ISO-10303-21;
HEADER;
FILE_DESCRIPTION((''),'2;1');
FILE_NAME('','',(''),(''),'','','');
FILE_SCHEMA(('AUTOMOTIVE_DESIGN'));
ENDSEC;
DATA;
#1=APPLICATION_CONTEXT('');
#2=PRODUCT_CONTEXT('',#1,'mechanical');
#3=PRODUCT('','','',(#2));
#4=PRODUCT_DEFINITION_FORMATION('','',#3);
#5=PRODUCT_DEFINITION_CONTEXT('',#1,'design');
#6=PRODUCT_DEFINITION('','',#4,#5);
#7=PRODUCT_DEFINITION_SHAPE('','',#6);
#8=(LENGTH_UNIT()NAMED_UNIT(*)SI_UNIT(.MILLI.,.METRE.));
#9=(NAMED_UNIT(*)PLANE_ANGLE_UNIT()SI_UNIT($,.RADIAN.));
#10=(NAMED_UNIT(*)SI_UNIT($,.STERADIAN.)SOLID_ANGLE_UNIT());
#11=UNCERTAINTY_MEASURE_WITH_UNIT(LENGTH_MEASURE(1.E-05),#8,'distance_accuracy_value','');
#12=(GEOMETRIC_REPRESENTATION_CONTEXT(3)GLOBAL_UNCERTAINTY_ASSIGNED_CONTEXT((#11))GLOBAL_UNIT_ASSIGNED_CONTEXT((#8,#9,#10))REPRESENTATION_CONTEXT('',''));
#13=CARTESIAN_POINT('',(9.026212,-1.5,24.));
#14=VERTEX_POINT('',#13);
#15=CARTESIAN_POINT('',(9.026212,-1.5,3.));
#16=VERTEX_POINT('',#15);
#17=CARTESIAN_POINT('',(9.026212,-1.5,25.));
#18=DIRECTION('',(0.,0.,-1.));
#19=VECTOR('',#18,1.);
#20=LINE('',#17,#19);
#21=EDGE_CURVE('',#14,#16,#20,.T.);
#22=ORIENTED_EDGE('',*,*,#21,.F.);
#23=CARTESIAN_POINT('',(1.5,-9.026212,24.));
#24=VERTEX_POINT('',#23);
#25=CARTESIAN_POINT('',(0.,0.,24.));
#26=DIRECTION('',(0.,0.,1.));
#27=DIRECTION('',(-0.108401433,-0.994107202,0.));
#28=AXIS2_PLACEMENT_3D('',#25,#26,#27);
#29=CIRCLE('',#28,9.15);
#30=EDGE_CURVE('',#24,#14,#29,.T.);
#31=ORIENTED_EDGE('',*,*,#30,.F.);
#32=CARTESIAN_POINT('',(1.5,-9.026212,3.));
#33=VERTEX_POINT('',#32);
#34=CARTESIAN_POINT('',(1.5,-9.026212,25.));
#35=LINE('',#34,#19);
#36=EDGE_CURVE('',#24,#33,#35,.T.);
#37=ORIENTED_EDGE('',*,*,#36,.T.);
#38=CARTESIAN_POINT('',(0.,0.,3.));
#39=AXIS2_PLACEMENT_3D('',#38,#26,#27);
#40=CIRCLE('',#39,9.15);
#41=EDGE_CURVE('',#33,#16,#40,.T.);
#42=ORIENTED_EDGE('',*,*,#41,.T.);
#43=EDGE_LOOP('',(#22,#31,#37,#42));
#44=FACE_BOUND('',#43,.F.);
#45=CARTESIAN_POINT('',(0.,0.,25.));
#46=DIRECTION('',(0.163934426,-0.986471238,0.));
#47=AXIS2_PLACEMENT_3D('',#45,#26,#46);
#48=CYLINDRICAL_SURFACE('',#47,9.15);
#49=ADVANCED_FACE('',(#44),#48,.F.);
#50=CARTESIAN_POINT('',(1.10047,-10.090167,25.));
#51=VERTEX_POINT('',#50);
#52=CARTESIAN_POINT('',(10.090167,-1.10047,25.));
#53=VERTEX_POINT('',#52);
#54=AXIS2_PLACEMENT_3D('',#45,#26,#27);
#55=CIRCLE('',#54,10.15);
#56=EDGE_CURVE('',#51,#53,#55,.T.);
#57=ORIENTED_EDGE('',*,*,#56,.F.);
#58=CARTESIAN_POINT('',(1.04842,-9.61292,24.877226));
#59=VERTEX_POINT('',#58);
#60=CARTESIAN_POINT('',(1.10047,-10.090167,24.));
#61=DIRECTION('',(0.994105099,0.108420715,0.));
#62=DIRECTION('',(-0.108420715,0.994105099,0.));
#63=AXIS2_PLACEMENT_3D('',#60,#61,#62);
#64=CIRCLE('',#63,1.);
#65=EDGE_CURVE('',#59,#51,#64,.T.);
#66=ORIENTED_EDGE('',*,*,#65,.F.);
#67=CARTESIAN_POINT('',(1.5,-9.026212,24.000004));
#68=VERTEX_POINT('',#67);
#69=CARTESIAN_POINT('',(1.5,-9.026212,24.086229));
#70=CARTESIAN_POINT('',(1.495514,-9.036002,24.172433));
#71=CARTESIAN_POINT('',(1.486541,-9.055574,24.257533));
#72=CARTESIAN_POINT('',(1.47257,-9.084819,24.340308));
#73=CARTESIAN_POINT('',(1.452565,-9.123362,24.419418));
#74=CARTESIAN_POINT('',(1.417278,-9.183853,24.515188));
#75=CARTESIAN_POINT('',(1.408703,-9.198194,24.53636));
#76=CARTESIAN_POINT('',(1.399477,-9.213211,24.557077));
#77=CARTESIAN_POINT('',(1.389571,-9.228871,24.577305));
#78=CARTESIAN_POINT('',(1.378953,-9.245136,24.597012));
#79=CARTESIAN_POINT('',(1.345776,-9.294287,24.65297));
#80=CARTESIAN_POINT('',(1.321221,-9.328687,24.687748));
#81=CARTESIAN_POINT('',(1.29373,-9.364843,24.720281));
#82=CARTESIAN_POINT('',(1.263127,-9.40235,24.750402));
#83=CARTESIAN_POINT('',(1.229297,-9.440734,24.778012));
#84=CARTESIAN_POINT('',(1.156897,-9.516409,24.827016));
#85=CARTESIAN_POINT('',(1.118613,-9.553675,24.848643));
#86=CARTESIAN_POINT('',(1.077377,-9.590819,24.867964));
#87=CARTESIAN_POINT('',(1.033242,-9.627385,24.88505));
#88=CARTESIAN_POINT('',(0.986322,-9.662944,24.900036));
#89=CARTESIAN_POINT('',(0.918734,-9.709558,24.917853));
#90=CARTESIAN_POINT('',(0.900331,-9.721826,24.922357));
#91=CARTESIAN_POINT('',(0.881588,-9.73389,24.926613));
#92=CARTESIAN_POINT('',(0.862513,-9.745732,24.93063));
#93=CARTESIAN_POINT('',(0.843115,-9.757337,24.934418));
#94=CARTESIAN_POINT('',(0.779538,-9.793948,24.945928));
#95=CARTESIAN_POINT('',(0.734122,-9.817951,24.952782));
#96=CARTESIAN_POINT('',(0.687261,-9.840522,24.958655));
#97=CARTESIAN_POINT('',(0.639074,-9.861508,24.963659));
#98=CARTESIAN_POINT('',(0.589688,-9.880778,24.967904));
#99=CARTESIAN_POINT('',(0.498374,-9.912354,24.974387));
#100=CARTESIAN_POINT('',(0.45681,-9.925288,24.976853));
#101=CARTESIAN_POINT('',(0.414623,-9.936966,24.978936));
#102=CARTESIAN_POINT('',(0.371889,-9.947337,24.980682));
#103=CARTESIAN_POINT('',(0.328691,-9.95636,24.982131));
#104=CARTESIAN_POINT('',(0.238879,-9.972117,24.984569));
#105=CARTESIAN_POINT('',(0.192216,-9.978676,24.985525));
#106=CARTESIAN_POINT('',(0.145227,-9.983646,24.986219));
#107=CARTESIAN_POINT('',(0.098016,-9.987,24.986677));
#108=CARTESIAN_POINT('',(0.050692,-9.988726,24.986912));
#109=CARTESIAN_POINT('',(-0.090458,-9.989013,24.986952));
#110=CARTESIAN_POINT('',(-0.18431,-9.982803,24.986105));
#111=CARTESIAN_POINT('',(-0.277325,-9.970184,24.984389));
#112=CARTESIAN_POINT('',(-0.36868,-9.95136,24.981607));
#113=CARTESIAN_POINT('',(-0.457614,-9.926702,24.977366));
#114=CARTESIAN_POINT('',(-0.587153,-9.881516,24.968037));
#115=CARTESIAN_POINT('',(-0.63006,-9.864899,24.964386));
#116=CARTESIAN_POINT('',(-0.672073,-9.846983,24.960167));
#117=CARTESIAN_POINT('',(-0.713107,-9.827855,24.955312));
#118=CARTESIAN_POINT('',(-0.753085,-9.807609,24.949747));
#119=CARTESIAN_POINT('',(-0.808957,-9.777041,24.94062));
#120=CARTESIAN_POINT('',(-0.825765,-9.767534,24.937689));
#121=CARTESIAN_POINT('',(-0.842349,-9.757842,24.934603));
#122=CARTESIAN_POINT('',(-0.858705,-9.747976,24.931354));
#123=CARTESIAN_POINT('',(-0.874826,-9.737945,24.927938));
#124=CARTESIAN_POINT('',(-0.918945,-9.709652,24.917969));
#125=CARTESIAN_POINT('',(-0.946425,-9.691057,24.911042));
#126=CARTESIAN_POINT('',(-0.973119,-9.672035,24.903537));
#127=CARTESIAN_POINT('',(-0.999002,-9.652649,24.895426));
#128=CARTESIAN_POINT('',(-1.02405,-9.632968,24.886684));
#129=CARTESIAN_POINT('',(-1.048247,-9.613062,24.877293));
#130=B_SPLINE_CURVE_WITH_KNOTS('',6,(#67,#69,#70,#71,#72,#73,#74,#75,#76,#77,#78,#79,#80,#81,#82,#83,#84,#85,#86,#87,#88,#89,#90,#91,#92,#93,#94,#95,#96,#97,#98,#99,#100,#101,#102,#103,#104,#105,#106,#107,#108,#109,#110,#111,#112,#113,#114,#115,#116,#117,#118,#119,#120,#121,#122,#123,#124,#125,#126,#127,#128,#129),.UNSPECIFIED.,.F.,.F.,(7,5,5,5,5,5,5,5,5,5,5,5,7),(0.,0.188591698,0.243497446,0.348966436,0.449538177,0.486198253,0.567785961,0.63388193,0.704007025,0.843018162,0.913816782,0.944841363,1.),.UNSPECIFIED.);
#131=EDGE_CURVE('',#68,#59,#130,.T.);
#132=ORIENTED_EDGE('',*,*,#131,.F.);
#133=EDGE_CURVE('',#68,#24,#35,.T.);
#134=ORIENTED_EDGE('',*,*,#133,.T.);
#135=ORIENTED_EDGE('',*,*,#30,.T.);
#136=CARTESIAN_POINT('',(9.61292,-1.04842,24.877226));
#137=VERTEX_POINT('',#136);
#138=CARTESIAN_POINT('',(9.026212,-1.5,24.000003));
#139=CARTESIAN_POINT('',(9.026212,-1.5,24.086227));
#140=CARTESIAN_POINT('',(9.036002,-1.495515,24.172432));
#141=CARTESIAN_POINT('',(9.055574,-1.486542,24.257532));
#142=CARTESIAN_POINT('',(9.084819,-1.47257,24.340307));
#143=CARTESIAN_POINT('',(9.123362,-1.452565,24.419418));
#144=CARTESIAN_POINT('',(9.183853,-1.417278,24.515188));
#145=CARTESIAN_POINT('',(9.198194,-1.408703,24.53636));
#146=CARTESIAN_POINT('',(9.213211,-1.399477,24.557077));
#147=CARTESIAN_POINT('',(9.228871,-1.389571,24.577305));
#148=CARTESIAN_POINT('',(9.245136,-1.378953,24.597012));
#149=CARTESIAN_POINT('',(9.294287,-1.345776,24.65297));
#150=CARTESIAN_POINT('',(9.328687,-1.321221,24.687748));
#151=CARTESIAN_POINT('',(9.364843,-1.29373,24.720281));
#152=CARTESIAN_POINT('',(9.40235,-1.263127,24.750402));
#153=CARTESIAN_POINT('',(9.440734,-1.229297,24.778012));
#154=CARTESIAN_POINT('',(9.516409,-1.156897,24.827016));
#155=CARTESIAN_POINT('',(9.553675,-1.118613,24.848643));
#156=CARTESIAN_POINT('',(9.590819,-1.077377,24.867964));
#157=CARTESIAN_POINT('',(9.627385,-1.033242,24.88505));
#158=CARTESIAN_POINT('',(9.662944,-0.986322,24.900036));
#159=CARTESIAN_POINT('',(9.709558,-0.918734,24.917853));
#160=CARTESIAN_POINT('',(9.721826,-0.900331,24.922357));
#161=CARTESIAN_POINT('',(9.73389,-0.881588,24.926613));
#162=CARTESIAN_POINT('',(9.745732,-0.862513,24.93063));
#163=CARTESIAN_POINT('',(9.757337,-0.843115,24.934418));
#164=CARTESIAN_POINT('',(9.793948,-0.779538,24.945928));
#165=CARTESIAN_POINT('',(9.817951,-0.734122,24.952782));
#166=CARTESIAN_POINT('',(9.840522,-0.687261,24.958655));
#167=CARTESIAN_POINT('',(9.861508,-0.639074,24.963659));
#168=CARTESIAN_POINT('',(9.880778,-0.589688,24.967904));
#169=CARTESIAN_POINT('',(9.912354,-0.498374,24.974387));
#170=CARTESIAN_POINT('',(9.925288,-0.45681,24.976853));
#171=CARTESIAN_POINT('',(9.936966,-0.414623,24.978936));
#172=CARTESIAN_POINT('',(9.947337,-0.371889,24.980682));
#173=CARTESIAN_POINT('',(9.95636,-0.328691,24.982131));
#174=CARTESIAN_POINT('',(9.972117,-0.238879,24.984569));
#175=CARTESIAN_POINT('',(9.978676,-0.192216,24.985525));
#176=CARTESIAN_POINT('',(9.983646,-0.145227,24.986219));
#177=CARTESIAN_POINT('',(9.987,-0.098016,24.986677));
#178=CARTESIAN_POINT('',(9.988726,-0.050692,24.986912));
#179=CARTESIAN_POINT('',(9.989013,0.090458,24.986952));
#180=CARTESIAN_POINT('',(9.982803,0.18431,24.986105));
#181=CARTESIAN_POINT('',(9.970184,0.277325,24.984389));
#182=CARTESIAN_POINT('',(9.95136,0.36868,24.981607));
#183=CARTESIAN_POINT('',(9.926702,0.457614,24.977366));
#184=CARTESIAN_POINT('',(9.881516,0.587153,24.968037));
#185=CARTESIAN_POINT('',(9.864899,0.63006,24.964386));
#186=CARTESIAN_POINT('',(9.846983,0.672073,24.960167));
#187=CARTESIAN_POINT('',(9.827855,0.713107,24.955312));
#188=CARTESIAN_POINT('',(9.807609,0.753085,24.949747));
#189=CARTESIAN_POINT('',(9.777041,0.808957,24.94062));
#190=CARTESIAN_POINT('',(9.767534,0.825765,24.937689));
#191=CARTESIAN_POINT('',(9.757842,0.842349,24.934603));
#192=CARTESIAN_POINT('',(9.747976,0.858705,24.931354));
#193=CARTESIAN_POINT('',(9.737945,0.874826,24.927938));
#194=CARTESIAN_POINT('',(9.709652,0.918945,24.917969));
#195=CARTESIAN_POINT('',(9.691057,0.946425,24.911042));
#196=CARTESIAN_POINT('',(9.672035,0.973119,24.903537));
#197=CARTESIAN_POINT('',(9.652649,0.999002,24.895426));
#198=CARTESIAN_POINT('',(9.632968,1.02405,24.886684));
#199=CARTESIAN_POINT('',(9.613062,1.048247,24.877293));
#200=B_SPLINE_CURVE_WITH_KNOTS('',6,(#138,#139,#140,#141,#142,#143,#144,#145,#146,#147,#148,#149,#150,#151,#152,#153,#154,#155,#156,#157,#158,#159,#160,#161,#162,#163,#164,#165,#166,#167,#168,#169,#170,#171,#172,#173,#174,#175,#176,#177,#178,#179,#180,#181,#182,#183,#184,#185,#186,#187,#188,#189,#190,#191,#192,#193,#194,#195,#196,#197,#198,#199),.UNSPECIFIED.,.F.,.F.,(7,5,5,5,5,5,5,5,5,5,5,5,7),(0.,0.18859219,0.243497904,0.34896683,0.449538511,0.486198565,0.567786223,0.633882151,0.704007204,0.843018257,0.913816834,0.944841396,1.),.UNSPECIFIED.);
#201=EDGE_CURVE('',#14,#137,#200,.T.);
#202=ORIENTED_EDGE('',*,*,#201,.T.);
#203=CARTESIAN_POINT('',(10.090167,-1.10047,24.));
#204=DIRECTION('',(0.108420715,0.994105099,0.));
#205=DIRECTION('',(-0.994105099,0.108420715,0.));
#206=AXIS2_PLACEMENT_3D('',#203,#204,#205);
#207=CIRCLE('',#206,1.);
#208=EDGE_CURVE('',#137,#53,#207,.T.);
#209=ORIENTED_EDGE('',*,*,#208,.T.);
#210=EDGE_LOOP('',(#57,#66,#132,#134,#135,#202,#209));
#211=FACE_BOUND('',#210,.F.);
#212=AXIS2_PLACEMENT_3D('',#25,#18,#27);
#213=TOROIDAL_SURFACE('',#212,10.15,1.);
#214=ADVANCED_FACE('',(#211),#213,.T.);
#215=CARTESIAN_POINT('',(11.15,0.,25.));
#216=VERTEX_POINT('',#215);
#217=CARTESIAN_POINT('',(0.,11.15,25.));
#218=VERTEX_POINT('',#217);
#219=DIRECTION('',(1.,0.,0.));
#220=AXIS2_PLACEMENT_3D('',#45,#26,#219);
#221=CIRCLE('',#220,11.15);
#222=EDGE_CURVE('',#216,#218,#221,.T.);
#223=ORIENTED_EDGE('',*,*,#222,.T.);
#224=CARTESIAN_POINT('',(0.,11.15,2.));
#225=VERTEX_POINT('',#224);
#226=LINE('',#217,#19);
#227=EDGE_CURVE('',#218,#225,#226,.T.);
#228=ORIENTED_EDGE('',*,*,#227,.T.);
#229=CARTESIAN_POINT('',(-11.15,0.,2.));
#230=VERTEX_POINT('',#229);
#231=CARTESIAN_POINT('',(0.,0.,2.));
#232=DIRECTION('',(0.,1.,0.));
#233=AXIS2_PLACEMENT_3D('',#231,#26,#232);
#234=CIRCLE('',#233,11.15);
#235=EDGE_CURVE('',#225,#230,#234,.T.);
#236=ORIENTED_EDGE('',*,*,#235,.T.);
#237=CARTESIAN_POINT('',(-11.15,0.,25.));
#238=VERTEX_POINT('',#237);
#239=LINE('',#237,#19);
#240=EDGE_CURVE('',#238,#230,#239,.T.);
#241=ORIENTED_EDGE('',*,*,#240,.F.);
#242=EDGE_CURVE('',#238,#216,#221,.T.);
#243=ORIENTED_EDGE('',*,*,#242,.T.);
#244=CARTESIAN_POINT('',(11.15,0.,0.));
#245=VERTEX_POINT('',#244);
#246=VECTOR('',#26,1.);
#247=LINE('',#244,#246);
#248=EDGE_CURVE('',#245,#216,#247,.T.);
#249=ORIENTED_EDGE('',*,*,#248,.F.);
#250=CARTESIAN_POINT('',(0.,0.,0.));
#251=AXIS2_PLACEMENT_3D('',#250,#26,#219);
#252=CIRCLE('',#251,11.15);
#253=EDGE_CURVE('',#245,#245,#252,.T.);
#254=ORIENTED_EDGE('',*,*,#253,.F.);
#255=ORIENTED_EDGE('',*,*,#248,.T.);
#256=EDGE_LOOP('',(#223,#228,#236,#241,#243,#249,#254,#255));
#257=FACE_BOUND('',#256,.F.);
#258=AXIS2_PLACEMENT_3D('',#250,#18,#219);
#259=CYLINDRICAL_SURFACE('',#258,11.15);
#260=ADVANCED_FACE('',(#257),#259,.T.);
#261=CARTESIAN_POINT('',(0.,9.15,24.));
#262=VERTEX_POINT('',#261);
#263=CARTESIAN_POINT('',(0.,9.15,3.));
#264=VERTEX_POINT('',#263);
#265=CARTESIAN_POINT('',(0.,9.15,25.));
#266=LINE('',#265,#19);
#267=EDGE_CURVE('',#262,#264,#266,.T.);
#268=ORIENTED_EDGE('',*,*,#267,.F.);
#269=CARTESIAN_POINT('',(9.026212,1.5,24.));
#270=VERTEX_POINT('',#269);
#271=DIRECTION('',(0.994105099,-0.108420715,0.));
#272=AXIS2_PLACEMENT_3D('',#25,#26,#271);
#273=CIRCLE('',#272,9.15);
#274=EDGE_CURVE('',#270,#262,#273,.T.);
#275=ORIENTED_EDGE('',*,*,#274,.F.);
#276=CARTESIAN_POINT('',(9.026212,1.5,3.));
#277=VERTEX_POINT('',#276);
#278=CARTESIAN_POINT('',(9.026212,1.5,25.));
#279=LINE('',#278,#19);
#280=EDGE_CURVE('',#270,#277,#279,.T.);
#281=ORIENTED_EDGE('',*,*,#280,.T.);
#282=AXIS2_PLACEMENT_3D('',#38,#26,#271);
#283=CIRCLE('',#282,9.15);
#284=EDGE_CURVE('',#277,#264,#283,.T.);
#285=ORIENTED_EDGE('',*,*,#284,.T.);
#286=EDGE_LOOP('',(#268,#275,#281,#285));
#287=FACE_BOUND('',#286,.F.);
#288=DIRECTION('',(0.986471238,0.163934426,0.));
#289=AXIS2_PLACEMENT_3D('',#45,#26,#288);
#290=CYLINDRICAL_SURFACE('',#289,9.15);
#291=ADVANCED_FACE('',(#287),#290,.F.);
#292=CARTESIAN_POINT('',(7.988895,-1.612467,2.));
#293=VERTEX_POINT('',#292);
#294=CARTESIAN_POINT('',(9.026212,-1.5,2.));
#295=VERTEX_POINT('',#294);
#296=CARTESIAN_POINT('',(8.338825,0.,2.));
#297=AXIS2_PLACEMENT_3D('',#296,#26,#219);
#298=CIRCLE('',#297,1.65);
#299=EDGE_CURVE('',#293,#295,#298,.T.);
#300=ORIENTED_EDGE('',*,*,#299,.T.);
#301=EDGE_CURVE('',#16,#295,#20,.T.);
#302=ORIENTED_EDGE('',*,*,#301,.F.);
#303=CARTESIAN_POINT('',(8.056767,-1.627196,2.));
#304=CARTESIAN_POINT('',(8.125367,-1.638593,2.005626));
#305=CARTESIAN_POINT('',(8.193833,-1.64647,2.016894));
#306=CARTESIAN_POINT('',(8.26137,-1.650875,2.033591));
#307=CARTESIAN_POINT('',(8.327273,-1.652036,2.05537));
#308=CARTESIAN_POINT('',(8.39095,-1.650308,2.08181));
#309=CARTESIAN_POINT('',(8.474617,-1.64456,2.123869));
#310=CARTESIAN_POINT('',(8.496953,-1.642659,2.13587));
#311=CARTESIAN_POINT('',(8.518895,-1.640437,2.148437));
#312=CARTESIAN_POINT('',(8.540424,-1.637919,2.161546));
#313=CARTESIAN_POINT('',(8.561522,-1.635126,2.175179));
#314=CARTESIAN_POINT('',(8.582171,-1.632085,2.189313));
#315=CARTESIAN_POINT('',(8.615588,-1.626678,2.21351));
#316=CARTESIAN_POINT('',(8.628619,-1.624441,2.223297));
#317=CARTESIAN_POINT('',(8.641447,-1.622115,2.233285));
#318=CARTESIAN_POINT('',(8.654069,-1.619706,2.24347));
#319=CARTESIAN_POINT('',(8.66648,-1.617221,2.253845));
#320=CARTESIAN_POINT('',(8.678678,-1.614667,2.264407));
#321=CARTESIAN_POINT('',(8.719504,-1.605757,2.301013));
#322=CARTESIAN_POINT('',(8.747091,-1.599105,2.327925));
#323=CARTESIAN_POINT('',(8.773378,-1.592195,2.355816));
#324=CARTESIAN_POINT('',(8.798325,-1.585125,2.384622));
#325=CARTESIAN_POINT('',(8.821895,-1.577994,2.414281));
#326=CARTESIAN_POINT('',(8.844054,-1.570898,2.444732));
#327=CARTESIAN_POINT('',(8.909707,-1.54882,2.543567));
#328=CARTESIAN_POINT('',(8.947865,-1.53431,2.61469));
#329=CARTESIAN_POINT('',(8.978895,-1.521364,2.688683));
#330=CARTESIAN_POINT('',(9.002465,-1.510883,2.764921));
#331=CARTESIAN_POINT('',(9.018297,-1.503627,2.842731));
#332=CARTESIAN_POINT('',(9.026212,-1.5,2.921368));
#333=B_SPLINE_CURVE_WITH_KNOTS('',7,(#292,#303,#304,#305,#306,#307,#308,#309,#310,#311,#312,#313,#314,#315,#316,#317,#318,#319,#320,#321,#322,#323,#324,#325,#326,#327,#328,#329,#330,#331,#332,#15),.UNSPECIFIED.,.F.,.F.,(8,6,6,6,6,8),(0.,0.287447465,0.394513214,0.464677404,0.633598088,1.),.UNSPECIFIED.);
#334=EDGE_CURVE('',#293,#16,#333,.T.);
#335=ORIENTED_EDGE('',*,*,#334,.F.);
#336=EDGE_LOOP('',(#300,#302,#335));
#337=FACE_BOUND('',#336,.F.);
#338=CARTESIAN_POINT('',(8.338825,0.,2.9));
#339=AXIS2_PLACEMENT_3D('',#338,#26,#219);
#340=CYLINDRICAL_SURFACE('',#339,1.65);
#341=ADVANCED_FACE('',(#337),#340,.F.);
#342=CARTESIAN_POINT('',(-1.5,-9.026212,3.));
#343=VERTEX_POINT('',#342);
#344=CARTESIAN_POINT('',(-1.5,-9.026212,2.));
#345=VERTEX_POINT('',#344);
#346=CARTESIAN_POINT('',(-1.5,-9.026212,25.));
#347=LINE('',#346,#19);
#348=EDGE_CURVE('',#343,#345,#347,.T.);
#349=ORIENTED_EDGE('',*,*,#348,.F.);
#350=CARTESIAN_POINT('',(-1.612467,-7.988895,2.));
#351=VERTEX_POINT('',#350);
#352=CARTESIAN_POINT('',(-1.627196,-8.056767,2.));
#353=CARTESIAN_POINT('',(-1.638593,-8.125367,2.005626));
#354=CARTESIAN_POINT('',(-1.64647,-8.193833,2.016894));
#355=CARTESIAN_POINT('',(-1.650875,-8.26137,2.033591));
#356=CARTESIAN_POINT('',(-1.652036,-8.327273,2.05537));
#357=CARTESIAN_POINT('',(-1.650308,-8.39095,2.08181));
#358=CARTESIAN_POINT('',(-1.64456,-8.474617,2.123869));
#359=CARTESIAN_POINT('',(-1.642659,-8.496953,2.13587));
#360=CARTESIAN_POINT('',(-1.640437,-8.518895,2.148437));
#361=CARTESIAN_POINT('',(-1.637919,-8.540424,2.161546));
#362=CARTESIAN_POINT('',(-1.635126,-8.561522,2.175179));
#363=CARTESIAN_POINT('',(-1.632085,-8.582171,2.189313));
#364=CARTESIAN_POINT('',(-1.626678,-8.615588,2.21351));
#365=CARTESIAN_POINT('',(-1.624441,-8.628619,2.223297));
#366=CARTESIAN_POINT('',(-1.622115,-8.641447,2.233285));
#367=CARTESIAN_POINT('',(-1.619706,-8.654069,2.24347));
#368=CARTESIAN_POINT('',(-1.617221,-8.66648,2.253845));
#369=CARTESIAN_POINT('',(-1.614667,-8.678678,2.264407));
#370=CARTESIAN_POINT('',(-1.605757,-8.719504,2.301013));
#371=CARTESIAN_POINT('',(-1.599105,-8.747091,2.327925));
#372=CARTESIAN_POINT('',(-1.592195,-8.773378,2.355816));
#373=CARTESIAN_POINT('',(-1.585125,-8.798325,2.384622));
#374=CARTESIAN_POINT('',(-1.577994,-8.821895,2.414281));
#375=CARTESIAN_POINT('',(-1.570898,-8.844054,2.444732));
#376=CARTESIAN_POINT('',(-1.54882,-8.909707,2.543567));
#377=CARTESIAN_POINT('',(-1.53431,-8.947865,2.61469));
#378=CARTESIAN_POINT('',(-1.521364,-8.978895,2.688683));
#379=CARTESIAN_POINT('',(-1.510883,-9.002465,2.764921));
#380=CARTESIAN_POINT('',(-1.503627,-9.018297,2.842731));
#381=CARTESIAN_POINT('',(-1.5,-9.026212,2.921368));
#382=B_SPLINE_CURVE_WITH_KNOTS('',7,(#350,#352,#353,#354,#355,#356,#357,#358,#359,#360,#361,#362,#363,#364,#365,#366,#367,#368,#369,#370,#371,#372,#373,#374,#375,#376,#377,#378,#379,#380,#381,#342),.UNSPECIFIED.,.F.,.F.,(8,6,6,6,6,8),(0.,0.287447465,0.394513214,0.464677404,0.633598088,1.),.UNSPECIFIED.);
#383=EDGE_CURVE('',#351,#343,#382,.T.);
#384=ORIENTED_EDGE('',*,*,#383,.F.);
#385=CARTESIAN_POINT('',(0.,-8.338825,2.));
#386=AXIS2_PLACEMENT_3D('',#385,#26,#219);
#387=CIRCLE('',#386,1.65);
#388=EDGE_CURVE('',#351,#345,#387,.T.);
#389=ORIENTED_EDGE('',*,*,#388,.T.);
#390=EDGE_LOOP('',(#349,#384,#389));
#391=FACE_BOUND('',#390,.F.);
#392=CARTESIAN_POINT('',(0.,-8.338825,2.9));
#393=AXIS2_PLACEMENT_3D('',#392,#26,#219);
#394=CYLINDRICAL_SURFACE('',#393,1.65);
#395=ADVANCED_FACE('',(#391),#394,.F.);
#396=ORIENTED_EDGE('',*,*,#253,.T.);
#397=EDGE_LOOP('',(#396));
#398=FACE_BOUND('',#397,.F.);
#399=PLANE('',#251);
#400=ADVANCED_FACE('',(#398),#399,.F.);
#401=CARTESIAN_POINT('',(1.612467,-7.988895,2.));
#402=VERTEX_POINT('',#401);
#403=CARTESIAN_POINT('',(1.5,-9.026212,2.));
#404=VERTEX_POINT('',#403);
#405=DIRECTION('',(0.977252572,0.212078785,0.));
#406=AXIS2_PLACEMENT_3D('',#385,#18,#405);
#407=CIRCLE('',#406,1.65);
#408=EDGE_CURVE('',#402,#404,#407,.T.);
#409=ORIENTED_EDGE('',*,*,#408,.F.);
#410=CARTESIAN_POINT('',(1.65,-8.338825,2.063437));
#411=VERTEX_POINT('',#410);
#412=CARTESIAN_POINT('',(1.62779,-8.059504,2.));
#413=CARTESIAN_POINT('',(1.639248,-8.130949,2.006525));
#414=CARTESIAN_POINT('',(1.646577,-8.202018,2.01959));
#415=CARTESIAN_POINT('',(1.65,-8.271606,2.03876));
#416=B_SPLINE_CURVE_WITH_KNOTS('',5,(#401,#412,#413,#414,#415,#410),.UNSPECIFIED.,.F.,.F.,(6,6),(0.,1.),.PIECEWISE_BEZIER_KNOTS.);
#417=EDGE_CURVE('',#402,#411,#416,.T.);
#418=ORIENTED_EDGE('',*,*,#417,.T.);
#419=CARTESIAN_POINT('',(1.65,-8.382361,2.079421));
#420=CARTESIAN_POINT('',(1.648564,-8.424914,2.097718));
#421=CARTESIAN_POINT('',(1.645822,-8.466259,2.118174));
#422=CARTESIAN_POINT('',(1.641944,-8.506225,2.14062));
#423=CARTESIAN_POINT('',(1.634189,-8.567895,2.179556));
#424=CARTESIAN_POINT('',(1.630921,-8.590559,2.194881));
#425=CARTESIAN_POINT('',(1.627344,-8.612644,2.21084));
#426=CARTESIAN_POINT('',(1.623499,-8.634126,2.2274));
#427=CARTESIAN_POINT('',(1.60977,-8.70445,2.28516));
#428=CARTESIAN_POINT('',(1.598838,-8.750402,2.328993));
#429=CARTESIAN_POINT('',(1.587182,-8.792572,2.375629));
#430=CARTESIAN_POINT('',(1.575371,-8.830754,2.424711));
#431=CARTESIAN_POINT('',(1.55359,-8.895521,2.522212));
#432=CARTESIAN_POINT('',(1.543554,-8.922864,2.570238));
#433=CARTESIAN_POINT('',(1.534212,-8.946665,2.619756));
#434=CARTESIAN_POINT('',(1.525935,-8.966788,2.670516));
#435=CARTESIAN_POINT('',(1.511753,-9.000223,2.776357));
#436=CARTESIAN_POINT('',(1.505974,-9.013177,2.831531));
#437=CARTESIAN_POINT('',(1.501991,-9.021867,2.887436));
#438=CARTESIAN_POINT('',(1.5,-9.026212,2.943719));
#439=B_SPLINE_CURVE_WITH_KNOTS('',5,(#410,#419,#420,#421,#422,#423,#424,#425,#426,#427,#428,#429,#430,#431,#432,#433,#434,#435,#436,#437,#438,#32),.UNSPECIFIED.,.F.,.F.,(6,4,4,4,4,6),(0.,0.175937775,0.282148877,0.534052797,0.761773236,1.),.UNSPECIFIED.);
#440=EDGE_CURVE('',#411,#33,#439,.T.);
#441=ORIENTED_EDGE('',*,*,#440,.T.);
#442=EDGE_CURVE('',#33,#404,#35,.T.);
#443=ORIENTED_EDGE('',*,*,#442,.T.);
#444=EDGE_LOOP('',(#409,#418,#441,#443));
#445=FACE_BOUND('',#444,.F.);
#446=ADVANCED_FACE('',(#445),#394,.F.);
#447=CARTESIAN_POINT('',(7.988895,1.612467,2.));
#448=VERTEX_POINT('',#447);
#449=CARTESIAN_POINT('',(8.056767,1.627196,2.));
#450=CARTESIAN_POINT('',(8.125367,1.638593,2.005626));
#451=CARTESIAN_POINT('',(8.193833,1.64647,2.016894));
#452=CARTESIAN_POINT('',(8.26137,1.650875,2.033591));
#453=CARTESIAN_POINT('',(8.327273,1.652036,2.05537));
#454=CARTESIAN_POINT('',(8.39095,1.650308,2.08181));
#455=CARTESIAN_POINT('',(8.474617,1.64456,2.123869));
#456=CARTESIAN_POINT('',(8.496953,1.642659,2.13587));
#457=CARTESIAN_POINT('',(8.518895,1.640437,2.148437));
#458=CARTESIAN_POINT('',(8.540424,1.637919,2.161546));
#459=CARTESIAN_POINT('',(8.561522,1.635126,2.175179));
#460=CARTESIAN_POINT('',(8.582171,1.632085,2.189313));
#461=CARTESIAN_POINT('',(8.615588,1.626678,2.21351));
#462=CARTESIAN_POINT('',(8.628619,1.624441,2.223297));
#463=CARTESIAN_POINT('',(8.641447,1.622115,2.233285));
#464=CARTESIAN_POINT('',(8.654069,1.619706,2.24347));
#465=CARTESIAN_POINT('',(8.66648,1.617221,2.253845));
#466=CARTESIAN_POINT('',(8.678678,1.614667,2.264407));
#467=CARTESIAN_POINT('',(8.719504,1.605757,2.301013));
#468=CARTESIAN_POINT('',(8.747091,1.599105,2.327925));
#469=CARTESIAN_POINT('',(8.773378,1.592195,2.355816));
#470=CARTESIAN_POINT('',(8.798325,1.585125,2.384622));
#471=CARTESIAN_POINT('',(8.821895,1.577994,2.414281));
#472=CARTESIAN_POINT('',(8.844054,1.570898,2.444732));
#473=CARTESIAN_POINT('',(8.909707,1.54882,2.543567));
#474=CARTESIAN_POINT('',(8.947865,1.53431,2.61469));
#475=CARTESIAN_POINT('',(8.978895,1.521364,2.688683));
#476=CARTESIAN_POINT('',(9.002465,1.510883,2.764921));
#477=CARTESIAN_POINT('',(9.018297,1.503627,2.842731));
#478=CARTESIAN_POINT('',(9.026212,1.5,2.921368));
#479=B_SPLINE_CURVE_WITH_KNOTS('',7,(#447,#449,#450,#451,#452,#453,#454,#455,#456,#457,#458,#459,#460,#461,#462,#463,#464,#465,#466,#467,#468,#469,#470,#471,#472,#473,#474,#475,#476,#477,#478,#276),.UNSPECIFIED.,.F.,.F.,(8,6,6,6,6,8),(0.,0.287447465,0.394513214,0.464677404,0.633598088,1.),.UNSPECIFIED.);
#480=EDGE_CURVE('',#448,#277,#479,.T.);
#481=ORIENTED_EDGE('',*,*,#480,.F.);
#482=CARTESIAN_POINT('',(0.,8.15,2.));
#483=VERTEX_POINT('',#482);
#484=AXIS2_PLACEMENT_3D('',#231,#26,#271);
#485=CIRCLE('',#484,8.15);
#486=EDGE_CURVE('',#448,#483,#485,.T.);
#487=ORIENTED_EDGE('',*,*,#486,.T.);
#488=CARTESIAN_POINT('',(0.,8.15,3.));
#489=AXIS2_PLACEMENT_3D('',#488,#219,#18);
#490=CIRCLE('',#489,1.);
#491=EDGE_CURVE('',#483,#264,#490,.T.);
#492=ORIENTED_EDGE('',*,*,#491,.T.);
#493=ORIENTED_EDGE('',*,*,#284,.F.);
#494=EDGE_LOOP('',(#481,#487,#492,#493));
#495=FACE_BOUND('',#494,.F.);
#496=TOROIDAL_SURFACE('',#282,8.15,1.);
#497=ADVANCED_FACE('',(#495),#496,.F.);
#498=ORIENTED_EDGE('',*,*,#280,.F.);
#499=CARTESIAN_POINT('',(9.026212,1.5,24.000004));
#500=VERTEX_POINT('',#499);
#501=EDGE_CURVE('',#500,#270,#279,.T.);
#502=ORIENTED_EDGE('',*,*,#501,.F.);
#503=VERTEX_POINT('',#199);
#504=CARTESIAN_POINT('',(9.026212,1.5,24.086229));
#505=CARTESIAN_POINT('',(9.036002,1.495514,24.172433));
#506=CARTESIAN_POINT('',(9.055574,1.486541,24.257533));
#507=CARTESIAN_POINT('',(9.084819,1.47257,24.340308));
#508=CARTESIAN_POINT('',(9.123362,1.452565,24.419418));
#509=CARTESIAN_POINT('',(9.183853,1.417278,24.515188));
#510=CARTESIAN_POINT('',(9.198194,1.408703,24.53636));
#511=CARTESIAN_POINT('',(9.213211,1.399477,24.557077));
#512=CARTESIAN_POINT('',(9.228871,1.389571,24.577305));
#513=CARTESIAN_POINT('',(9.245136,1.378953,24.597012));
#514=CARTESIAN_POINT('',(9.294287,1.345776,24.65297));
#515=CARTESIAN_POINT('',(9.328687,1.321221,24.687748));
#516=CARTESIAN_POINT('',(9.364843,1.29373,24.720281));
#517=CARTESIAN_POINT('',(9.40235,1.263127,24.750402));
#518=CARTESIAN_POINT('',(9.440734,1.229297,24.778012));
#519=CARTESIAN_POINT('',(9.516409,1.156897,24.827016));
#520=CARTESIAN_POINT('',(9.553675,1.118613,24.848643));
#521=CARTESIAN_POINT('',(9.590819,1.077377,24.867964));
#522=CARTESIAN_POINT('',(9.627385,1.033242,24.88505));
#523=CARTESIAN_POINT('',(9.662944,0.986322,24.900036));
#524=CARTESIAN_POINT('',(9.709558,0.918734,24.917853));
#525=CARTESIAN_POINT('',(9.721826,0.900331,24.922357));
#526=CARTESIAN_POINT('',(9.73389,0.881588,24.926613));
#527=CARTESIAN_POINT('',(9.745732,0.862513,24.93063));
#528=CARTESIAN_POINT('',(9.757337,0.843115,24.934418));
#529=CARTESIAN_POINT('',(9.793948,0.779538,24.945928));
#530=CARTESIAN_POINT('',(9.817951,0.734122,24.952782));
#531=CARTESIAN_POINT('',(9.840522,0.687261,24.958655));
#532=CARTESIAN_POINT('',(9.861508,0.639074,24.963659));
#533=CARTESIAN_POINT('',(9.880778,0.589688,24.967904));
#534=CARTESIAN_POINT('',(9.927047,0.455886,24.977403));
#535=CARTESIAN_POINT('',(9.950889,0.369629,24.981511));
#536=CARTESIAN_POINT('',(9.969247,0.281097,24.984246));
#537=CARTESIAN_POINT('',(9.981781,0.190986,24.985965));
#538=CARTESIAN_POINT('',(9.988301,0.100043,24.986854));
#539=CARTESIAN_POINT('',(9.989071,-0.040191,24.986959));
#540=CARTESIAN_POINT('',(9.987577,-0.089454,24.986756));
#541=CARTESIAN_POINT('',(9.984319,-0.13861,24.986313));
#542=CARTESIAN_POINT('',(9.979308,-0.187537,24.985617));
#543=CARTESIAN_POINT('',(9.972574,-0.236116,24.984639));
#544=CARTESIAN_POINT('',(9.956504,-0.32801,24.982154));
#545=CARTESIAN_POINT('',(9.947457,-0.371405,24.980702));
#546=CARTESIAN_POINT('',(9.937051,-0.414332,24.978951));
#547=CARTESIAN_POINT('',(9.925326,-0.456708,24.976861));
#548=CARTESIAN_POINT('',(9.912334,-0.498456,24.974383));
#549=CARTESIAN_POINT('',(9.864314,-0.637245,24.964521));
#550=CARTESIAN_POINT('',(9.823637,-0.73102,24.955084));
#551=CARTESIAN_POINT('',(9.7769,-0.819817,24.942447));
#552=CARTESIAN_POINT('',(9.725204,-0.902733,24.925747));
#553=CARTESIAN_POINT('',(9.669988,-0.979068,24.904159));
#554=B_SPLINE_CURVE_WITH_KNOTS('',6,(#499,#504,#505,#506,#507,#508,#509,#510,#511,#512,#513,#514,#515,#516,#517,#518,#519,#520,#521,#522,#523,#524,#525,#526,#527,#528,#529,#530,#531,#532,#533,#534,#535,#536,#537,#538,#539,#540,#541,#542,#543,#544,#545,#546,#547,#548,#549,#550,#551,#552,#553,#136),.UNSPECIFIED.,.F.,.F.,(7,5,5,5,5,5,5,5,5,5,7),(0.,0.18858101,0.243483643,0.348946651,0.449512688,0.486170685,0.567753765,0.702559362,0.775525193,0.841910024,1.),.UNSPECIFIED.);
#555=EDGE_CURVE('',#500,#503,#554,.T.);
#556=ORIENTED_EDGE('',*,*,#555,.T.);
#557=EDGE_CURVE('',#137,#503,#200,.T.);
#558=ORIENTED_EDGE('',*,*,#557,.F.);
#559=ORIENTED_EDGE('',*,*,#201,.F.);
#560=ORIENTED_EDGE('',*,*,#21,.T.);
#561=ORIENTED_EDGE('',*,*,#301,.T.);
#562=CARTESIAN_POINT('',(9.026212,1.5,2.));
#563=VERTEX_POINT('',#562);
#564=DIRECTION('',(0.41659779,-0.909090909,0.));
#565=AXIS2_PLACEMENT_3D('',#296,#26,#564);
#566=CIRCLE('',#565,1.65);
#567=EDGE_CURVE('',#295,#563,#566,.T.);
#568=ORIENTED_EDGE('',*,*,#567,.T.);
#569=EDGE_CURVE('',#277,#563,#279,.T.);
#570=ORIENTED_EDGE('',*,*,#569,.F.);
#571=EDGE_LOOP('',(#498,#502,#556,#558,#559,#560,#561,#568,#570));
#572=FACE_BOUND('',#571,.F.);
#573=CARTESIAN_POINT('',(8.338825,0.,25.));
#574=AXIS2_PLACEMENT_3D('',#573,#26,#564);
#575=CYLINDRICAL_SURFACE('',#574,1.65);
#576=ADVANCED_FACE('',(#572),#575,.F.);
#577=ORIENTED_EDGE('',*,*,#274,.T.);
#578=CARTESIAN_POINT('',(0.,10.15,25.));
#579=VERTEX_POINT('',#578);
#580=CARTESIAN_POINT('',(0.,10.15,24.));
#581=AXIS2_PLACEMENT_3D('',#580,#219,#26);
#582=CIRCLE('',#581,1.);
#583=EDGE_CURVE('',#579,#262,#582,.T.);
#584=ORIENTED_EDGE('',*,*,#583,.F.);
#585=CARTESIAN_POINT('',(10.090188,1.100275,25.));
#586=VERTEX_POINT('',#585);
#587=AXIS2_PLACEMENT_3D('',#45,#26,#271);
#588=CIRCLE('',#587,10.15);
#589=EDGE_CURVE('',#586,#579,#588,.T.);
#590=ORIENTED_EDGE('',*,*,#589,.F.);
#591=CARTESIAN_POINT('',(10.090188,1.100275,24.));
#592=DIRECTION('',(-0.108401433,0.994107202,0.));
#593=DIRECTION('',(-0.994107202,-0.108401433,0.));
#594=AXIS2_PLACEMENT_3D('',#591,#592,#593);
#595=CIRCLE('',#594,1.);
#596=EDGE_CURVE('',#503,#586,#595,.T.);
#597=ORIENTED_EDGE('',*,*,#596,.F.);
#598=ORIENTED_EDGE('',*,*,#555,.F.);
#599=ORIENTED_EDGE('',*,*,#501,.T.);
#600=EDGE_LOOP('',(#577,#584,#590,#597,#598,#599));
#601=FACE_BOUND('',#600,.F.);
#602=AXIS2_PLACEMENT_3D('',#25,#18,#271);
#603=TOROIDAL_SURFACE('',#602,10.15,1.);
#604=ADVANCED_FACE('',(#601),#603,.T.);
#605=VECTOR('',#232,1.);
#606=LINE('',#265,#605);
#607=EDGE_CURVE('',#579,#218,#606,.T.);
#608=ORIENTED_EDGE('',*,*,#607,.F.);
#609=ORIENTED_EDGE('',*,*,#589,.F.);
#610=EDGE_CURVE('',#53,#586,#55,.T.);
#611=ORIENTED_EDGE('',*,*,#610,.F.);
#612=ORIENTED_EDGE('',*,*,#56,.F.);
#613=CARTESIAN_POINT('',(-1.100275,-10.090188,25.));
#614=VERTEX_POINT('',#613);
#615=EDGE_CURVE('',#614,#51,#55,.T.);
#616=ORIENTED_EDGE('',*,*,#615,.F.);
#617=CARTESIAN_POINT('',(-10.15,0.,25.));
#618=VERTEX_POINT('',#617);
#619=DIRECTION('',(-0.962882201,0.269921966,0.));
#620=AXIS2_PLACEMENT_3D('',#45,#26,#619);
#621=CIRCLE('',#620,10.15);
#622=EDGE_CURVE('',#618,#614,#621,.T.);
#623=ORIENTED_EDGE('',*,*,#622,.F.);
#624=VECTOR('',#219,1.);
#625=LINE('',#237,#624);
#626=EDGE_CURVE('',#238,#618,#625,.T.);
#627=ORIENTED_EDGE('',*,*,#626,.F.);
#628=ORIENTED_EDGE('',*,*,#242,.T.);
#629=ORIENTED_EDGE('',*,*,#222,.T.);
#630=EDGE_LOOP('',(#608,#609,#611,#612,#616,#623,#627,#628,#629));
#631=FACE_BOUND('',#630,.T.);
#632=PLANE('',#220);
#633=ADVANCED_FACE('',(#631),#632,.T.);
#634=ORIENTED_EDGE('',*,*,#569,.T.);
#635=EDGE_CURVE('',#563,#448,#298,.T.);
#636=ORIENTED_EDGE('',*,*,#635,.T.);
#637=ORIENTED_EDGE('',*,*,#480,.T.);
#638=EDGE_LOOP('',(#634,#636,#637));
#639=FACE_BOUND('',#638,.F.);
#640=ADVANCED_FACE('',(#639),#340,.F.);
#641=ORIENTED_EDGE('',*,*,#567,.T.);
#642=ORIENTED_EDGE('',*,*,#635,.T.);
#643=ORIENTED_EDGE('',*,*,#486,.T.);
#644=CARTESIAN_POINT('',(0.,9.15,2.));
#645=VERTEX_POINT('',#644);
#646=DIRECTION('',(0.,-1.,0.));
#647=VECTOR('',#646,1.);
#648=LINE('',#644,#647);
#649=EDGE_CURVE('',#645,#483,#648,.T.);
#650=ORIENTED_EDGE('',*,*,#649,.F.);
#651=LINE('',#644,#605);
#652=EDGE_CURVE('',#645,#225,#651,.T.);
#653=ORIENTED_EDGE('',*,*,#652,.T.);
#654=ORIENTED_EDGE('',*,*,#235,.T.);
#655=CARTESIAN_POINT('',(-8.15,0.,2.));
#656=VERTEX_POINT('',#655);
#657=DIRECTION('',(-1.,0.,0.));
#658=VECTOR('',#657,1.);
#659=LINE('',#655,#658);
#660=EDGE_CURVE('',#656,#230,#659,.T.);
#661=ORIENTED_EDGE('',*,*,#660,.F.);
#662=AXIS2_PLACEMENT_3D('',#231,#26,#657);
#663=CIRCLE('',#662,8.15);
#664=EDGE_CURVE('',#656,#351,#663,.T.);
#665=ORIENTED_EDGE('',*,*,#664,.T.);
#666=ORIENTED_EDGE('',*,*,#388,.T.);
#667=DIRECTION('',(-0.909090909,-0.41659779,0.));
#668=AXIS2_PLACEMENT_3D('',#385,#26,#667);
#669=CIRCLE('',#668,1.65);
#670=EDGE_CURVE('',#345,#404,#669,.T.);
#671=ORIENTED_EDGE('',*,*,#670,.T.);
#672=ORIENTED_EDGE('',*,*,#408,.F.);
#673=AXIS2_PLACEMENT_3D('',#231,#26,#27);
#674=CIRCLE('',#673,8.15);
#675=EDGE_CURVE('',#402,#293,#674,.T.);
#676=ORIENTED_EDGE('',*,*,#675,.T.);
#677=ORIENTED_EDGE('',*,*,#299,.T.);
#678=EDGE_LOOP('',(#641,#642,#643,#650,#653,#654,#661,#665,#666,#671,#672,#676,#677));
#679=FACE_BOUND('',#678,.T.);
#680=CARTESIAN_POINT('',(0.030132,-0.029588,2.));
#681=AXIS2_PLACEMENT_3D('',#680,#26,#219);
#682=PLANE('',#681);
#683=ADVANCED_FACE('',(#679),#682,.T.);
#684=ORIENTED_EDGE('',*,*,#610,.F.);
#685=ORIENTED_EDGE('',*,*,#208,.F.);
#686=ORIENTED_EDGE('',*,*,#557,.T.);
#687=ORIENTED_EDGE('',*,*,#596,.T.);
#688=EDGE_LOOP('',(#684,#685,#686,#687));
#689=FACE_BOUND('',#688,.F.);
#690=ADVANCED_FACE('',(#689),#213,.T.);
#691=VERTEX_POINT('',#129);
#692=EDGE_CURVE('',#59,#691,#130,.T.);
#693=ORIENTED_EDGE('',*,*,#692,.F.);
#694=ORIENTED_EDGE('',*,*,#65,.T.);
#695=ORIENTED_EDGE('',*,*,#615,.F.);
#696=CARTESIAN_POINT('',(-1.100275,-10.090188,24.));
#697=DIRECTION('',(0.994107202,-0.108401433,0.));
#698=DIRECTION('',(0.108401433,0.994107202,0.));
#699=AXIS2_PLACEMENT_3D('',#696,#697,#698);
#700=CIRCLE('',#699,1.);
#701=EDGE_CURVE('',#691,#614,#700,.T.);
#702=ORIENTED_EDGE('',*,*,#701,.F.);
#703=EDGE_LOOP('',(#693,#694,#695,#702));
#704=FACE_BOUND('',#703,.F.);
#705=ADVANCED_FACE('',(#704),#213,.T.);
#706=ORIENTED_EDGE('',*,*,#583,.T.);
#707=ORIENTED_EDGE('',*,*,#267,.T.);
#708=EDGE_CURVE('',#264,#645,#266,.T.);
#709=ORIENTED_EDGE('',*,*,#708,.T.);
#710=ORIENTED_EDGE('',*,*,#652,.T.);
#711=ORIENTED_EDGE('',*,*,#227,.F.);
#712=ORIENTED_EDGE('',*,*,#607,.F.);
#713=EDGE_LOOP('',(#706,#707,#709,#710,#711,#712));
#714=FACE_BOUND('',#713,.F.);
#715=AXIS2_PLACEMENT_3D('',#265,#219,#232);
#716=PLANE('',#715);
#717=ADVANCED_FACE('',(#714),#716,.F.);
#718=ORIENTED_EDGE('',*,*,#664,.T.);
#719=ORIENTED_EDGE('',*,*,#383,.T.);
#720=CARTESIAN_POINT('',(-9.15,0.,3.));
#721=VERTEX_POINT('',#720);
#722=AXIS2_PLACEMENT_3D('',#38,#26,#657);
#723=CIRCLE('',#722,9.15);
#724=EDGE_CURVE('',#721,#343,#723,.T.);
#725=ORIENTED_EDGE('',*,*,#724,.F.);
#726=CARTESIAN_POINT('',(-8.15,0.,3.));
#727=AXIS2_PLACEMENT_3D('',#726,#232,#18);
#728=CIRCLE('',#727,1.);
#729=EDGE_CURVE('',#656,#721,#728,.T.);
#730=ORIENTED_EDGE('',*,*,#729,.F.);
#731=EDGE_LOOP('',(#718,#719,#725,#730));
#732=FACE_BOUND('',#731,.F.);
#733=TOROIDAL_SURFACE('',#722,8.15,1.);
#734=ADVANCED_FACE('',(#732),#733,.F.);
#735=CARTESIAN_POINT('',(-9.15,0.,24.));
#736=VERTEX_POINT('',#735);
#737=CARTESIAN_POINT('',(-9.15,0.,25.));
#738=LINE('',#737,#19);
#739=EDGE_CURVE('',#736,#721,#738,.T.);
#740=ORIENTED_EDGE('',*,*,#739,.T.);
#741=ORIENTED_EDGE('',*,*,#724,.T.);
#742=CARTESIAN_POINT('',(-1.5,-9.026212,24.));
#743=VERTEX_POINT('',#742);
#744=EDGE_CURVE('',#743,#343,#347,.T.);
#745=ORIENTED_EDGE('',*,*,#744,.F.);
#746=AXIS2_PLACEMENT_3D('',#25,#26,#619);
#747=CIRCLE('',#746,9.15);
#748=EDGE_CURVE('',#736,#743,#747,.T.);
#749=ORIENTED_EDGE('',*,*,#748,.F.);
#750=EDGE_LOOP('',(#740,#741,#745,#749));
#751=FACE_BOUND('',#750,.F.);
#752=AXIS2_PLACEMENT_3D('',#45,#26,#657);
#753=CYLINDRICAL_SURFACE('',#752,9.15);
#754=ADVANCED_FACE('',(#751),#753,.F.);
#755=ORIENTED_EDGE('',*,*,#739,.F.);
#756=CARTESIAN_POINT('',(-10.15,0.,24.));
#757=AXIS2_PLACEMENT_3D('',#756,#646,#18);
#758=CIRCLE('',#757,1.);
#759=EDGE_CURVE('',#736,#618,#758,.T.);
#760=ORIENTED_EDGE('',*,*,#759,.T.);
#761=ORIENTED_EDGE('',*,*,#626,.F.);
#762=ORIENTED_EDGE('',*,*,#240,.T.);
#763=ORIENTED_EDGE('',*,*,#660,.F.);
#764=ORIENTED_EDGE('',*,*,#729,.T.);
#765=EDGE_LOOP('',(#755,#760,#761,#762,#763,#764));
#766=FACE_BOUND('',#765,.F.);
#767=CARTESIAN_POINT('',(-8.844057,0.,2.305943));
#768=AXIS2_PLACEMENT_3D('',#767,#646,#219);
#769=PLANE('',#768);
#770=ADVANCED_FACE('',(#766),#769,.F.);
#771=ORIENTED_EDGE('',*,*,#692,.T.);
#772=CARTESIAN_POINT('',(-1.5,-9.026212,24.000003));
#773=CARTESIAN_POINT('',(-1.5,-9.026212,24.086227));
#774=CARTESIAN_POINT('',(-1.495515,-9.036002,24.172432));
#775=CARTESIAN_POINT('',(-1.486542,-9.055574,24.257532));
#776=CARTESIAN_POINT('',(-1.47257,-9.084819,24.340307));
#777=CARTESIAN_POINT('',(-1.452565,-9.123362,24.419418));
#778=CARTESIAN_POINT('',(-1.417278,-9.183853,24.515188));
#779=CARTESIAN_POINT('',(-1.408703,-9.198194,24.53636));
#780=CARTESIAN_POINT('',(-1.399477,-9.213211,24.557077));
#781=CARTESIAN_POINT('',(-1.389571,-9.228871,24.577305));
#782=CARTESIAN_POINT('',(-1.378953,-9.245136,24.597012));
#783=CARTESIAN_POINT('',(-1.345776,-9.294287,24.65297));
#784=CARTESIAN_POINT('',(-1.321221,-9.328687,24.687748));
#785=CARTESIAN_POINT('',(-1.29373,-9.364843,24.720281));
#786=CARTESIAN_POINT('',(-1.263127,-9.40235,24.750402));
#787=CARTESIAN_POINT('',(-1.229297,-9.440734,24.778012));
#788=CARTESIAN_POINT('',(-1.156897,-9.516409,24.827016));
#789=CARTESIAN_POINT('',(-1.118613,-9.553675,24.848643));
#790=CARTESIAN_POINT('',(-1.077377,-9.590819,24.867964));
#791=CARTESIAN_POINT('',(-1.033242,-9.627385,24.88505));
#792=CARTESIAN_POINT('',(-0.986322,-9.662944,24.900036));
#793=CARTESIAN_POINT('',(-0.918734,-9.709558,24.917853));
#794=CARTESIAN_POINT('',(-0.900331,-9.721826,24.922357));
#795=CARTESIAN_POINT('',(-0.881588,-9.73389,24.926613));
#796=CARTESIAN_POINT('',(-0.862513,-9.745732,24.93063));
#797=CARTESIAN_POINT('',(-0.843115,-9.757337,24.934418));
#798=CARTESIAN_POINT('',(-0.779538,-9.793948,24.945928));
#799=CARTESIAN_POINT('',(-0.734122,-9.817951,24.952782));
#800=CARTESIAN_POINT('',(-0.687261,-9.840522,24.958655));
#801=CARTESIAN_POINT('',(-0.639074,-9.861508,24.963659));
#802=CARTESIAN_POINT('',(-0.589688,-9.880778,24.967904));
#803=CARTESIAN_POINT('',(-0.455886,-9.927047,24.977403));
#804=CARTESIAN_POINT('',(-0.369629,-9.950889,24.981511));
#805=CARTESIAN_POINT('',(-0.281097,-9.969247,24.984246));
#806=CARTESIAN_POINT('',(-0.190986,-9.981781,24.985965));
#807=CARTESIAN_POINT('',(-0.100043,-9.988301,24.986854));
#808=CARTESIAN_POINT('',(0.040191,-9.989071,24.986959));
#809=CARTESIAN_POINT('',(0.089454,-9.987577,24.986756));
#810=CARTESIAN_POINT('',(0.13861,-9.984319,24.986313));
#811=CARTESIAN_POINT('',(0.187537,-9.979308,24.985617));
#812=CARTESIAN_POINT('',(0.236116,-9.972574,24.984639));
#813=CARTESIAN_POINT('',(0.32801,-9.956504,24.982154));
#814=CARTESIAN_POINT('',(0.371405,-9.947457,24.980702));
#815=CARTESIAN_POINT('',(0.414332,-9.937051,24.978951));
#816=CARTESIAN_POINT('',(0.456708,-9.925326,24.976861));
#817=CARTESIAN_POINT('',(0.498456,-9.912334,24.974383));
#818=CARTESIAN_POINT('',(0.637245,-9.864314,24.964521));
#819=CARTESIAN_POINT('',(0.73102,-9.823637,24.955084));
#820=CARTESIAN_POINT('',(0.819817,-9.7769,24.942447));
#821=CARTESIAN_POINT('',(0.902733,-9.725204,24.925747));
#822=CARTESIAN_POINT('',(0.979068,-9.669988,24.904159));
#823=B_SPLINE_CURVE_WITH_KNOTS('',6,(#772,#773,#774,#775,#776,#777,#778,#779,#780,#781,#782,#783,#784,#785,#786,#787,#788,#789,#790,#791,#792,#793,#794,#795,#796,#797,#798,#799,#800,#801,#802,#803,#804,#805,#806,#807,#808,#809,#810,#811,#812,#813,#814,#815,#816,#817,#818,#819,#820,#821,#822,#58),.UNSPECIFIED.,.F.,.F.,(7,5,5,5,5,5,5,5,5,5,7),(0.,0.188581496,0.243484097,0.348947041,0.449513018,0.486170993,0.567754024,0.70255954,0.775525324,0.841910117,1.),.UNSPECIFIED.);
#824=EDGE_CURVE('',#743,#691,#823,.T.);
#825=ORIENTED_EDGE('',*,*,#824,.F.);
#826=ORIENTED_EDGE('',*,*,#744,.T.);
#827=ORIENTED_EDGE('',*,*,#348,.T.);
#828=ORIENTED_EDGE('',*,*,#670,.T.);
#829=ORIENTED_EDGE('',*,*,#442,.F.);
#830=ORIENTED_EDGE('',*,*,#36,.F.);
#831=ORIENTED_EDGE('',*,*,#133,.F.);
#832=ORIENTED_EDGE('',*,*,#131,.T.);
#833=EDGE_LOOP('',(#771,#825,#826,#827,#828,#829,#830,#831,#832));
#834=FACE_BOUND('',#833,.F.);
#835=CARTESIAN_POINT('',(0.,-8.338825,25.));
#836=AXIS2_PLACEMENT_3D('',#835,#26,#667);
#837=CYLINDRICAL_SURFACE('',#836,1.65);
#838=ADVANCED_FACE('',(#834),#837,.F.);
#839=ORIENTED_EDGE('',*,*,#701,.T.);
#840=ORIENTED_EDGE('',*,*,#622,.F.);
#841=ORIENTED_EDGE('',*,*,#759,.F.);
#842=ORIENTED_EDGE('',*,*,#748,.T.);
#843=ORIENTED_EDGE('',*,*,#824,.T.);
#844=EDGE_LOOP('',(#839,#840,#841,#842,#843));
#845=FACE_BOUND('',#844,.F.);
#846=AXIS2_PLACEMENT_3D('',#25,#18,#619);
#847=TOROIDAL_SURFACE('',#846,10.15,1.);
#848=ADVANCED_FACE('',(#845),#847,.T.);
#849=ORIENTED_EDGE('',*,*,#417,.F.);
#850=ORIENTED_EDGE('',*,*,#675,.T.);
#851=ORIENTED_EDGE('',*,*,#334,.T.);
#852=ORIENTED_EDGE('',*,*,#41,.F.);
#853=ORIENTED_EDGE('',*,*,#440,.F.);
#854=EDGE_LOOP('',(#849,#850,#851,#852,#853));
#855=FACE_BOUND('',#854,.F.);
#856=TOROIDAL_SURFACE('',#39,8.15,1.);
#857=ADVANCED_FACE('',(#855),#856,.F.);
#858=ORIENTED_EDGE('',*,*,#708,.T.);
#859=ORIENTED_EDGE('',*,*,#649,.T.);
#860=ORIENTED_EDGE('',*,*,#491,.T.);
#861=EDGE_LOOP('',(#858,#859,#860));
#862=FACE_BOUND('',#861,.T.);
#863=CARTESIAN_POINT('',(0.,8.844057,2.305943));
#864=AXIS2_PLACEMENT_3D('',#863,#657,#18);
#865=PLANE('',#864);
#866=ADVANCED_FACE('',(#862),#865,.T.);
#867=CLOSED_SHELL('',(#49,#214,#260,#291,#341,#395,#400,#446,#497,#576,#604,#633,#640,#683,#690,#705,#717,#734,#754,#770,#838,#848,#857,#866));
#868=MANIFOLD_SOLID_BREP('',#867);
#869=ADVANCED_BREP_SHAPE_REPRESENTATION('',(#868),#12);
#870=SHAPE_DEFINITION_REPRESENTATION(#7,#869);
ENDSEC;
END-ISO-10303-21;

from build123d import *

# Parameters (mm, degrees)
F0_R         = 11.15
F1_DEPTH     = 25
F3_DEPTH     = 23
F4_T4_ANGLE  = 102.4463467312
F4_S5_R      = 1.65
F4_T6_DEPTH  = 9
F4_S7_R      = 1.65
F4_T8_DEPTH  = 9
F4_T12_ANGLE = 96.2242847007
F4_S13_R     = 1.65
F4_T14_DEPTH = 9
F4_T18_ANGLE = 96.2242847007
F4_S19_R     = 1.65
F4_T20_DEPTH = 9
F4_T22_ANGLE = 102.4463467312
F4_T24_ANGLE = 111.8839081247
F4_T26_ANGLE = 111.8839081247


# Not quite as in the source:
# - a fillet or chamfer that OpenCascade refuses, or shapes differently, is made with other operations: its cross-section is extruded or revolved along the edge and cut away or added


with BuildPart() as f1:
    # F0 (on Top) → F1 (new body)
    with BuildSketch(Plane.XY):
        Circle(F0_R)
    extrude(amount=F1_DEPTH)

    # F2 (on face) → F3 (cut)
    with BuildSketch(Plane.XY.offset(25)):
        with BuildLine():
            ThreePointArc((9.02621183, -1.5), (9.1190004453, -0.7525495849), (9.15, 0))
            ThreePointArc((9.15, 0), (9.1190004453, 0.7525495849), (9.02621183, 1.5))
            ThreePointArc((9.02621183, 1.5), (5.9159741379, 6.9802399672), (0, 9.15))
            ThreePointArc((0, 9.15), (-6.4700270479, 6.4700270479), (-9.15, 0))
            ThreePointArc((-9.15, 0), (-6.9802399672, -5.9159741379), (-1.5, -9.02621183))
            ThreePointArc((-1.5, -9.02621183), (0, -9.15), (1.5, -9.02621183))
            ThreePointArc((1.5, -9.02621183), (6.4700270479, -6.4700270479), (9.02621183, -1.5))
        make_face()
        with BuildLine():
            ThreePointArc((9.02621183, 1.5), (9.1190004453, 0.7525495849), (9.15, 0))
            ThreePointArc((9.15, 0), (9.1190004453, -0.7525495849), (9.02621183, -1.5))
            ThreePointArc((9.02621183, -1.5), (9.9888254758, 0), (9.02621183, 1.5))
        make_face()
        with BuildLine():
            ThreePointArc((-1.5, -9.02621183), (0, -9.9888254758), (1.5, -9.02621183))
            ThreePointArc((1.5, -9.02621183), (0, -9.15), (-1.5, -9.02621183))
        make_face()
        with BuildLine():
            ThreePointArc((-9.15, 0), (-6.4700270479, 6.4700270479), (0, 9.15))
            Line((0, 9.15), (0, 11.15))
            ThreePointArc((0, 11.15), (-7.8842406102, 7.8842406102), (-11.15, 0))
            Line((-11.15, 0), (-9.15, 0))
        make_face()
    extrude(amount=-F3_DEPTH, mode=Mode.SUBTRACT)

    # F4: fillet of radius 1 on 6 edges, made by hand


with BuildPart() as f4_tool2:
    # F4_s3 → F4_t4 (revolve)
    with BuildSketch(Plane(origin=(0, 0, 0), x_dir=(0, 0, 1), z_dir=(-0.9941072022, 0.1084014327, 0))):
        with BuildLine():
            ThreePointArc((2, -8.15), (2.2928932188, -8.8571067812), (3, -9.15))
            Line((3, -9.15), (2, -9.15))
            Line((2, -9.15), (2, -8.15))
        make_face()
    revolve(axis=Axis((0, 0, 2), (0, 0, 1)), revolution_arc=F4_T4_ANGLE)

    # F4_s5 → F4_t6 (cut, symmetric)
    with BuildSketch(Plane.XY.offset(2.9)):
        with Locations((8.3388254758, 0)):
            Circle(F4_S5_R)
    extrude(amount=F4_T6_DEPTH, both=True, mode=Mode.SUBTRACT)

    # F4_s7 → F4_t8 (cut, symmetric)
    with BuildSketch(Plane.XY.offset(2.9)):
        with Locations((0, -8.3388254758)):
            Circle(F4_S7_R)
    extrude(amount=F4_T8_DEPTH, both=True, mode=Mode.SUBTRACT)


with BuildPart() as f1_1:
    add(f1.part)

    # F4_t1: union F4_tool2
    add(f4_tool2.part)


with BuildPart() as f4_tool10:
    # F4_s11 → F4_t12 (revolve)
    with BuildSketch(Plane(origin=(0, 0, 0), x_dir=(0, 0, 1), z_dir=(-0.1084207149, -0.9941050994, 0))):
        with BuildLine():
            ThreePointArc((2, -8.15), (2.2928932188, -8.8571067812), (3, -9.15))
            Line((3, -9.15), (2, -9.15))
            Line((2, -9.15), (2, -8.15))
        make_face()
    revolve(axis=Axis((0, 0, 2), (0, 0, 1)), revolution_arc=F4_T12_ANGLE)

    # F4_s13 → F4_t14 (cut, symmetric)
    with BuildSketch(Plane.XY.offset(2.9)):
        with Locations((8.3388254758, 0)):
            Circle(F4_S13_R)
    extrude(amount=F4_T14_DEPTH, both=True, mode=Mode.SUBTRACT)


with BuildPart() as f1_2:
    add(f1_1.part)

    # F4_t9: union F4_tool10
    add(f4_tool10.part)


with BuildPart() as f4_tool16:
    # F4_s17 → F4_t18 (revolve)
    with BuildSketch(Plane.XZ):
        with BuildLine():
            ThreePointArc((-8.15, 2), (-8.8571067812, 2.2928932188), (-9.15, 3))
            Line((-9.15, 3), (-9.15, 2))
            Line((-9.15, 2), (-8.15, 2))
        make_face()
    revolve(axis=Axis((0, 0, 2), (0, 0, 1)), revolution_arc=F4_T18_ANGLE)

    # F4_s19 → F4_t20 (cut, symmetric)
    with BuildSketch(Plane.XY.offset(2.9)):
        with Locations((0, -8.3388254758)):
            Circle(F4_S19_R)
    extrude(amount=F4_T20_DEPTH, both=True, mode=Mode.SUBTRACT)


with BuildPart() as f1_3:
    add(f1_2.part)

    # F4_t15: union F4_tool16
    add(f4_tool16.part)

    # F4_s21 → F4_t22 (revolve, cut)
    with BuildSketch(Plane(origin=(0, 0, 0), x_dir=(0, 0, 1), z_dir=(-0.9941072022, 0.1084014327, 0))):
        with BuildLine():
            ThreePointArc((24, -9.15), (24.7071067812, -9.4428932188), (25, -10.15))
            Line((25, -10.15), (25, -9.15))
            Line((25, -9.15), (24, -9.15))
        make_face()
    revolve(axis=Axis((0, 0, 25), (0, 0, 1)), revolution_arc=F4_T22_ANGLE, mode=Mode.SUBTRACT)

    # F4_s23 → F4_t24 (revolve, cut)
    with BuildSketch(Plane(origin=(0, 0, 0), x_dir=(0, 0, 1), z_dir=(0.2699219659, 0.9628822006, 0))):
        with BuildLine():
            ThreePointArc((24, -9.15), (24.7071067812, -9.4428932188), (25, -10.15))
            Line((25, -10.15), (25, -9.15))
            Line((25, -9.15), (24, -9.15))
        make_face()
    revolve(axis=Axis((0, 0, 25), (0, 0, 1)), revolution_arc=F4_T24_ANGLE, mode=Mode.SUBTRACT)

    # F4_s25 → F4_t26 (revolve, cut)
    with BuildSketch(Plane(origin=(0, 0, 0), x_dir=(0, 0, 1), z_dir=(-0.1084207149, -0.9941050994, 0))):
        with BuildLine():
            ThreePointArc((24, -9.15), (24.7071067812, -9.4428932188), (25, -10.15))
            Line((25, -10.15), (25, -9.15))
            Line((25, -9.15), (24, -9.15))
        make_face()
    revolve(axis=Axis((0, 0, 25), (0, 0, 1)), revolution_arc=F4_T26_ANGLE, mode=Mode.SUBTRACT)


solid = f1_3.part
